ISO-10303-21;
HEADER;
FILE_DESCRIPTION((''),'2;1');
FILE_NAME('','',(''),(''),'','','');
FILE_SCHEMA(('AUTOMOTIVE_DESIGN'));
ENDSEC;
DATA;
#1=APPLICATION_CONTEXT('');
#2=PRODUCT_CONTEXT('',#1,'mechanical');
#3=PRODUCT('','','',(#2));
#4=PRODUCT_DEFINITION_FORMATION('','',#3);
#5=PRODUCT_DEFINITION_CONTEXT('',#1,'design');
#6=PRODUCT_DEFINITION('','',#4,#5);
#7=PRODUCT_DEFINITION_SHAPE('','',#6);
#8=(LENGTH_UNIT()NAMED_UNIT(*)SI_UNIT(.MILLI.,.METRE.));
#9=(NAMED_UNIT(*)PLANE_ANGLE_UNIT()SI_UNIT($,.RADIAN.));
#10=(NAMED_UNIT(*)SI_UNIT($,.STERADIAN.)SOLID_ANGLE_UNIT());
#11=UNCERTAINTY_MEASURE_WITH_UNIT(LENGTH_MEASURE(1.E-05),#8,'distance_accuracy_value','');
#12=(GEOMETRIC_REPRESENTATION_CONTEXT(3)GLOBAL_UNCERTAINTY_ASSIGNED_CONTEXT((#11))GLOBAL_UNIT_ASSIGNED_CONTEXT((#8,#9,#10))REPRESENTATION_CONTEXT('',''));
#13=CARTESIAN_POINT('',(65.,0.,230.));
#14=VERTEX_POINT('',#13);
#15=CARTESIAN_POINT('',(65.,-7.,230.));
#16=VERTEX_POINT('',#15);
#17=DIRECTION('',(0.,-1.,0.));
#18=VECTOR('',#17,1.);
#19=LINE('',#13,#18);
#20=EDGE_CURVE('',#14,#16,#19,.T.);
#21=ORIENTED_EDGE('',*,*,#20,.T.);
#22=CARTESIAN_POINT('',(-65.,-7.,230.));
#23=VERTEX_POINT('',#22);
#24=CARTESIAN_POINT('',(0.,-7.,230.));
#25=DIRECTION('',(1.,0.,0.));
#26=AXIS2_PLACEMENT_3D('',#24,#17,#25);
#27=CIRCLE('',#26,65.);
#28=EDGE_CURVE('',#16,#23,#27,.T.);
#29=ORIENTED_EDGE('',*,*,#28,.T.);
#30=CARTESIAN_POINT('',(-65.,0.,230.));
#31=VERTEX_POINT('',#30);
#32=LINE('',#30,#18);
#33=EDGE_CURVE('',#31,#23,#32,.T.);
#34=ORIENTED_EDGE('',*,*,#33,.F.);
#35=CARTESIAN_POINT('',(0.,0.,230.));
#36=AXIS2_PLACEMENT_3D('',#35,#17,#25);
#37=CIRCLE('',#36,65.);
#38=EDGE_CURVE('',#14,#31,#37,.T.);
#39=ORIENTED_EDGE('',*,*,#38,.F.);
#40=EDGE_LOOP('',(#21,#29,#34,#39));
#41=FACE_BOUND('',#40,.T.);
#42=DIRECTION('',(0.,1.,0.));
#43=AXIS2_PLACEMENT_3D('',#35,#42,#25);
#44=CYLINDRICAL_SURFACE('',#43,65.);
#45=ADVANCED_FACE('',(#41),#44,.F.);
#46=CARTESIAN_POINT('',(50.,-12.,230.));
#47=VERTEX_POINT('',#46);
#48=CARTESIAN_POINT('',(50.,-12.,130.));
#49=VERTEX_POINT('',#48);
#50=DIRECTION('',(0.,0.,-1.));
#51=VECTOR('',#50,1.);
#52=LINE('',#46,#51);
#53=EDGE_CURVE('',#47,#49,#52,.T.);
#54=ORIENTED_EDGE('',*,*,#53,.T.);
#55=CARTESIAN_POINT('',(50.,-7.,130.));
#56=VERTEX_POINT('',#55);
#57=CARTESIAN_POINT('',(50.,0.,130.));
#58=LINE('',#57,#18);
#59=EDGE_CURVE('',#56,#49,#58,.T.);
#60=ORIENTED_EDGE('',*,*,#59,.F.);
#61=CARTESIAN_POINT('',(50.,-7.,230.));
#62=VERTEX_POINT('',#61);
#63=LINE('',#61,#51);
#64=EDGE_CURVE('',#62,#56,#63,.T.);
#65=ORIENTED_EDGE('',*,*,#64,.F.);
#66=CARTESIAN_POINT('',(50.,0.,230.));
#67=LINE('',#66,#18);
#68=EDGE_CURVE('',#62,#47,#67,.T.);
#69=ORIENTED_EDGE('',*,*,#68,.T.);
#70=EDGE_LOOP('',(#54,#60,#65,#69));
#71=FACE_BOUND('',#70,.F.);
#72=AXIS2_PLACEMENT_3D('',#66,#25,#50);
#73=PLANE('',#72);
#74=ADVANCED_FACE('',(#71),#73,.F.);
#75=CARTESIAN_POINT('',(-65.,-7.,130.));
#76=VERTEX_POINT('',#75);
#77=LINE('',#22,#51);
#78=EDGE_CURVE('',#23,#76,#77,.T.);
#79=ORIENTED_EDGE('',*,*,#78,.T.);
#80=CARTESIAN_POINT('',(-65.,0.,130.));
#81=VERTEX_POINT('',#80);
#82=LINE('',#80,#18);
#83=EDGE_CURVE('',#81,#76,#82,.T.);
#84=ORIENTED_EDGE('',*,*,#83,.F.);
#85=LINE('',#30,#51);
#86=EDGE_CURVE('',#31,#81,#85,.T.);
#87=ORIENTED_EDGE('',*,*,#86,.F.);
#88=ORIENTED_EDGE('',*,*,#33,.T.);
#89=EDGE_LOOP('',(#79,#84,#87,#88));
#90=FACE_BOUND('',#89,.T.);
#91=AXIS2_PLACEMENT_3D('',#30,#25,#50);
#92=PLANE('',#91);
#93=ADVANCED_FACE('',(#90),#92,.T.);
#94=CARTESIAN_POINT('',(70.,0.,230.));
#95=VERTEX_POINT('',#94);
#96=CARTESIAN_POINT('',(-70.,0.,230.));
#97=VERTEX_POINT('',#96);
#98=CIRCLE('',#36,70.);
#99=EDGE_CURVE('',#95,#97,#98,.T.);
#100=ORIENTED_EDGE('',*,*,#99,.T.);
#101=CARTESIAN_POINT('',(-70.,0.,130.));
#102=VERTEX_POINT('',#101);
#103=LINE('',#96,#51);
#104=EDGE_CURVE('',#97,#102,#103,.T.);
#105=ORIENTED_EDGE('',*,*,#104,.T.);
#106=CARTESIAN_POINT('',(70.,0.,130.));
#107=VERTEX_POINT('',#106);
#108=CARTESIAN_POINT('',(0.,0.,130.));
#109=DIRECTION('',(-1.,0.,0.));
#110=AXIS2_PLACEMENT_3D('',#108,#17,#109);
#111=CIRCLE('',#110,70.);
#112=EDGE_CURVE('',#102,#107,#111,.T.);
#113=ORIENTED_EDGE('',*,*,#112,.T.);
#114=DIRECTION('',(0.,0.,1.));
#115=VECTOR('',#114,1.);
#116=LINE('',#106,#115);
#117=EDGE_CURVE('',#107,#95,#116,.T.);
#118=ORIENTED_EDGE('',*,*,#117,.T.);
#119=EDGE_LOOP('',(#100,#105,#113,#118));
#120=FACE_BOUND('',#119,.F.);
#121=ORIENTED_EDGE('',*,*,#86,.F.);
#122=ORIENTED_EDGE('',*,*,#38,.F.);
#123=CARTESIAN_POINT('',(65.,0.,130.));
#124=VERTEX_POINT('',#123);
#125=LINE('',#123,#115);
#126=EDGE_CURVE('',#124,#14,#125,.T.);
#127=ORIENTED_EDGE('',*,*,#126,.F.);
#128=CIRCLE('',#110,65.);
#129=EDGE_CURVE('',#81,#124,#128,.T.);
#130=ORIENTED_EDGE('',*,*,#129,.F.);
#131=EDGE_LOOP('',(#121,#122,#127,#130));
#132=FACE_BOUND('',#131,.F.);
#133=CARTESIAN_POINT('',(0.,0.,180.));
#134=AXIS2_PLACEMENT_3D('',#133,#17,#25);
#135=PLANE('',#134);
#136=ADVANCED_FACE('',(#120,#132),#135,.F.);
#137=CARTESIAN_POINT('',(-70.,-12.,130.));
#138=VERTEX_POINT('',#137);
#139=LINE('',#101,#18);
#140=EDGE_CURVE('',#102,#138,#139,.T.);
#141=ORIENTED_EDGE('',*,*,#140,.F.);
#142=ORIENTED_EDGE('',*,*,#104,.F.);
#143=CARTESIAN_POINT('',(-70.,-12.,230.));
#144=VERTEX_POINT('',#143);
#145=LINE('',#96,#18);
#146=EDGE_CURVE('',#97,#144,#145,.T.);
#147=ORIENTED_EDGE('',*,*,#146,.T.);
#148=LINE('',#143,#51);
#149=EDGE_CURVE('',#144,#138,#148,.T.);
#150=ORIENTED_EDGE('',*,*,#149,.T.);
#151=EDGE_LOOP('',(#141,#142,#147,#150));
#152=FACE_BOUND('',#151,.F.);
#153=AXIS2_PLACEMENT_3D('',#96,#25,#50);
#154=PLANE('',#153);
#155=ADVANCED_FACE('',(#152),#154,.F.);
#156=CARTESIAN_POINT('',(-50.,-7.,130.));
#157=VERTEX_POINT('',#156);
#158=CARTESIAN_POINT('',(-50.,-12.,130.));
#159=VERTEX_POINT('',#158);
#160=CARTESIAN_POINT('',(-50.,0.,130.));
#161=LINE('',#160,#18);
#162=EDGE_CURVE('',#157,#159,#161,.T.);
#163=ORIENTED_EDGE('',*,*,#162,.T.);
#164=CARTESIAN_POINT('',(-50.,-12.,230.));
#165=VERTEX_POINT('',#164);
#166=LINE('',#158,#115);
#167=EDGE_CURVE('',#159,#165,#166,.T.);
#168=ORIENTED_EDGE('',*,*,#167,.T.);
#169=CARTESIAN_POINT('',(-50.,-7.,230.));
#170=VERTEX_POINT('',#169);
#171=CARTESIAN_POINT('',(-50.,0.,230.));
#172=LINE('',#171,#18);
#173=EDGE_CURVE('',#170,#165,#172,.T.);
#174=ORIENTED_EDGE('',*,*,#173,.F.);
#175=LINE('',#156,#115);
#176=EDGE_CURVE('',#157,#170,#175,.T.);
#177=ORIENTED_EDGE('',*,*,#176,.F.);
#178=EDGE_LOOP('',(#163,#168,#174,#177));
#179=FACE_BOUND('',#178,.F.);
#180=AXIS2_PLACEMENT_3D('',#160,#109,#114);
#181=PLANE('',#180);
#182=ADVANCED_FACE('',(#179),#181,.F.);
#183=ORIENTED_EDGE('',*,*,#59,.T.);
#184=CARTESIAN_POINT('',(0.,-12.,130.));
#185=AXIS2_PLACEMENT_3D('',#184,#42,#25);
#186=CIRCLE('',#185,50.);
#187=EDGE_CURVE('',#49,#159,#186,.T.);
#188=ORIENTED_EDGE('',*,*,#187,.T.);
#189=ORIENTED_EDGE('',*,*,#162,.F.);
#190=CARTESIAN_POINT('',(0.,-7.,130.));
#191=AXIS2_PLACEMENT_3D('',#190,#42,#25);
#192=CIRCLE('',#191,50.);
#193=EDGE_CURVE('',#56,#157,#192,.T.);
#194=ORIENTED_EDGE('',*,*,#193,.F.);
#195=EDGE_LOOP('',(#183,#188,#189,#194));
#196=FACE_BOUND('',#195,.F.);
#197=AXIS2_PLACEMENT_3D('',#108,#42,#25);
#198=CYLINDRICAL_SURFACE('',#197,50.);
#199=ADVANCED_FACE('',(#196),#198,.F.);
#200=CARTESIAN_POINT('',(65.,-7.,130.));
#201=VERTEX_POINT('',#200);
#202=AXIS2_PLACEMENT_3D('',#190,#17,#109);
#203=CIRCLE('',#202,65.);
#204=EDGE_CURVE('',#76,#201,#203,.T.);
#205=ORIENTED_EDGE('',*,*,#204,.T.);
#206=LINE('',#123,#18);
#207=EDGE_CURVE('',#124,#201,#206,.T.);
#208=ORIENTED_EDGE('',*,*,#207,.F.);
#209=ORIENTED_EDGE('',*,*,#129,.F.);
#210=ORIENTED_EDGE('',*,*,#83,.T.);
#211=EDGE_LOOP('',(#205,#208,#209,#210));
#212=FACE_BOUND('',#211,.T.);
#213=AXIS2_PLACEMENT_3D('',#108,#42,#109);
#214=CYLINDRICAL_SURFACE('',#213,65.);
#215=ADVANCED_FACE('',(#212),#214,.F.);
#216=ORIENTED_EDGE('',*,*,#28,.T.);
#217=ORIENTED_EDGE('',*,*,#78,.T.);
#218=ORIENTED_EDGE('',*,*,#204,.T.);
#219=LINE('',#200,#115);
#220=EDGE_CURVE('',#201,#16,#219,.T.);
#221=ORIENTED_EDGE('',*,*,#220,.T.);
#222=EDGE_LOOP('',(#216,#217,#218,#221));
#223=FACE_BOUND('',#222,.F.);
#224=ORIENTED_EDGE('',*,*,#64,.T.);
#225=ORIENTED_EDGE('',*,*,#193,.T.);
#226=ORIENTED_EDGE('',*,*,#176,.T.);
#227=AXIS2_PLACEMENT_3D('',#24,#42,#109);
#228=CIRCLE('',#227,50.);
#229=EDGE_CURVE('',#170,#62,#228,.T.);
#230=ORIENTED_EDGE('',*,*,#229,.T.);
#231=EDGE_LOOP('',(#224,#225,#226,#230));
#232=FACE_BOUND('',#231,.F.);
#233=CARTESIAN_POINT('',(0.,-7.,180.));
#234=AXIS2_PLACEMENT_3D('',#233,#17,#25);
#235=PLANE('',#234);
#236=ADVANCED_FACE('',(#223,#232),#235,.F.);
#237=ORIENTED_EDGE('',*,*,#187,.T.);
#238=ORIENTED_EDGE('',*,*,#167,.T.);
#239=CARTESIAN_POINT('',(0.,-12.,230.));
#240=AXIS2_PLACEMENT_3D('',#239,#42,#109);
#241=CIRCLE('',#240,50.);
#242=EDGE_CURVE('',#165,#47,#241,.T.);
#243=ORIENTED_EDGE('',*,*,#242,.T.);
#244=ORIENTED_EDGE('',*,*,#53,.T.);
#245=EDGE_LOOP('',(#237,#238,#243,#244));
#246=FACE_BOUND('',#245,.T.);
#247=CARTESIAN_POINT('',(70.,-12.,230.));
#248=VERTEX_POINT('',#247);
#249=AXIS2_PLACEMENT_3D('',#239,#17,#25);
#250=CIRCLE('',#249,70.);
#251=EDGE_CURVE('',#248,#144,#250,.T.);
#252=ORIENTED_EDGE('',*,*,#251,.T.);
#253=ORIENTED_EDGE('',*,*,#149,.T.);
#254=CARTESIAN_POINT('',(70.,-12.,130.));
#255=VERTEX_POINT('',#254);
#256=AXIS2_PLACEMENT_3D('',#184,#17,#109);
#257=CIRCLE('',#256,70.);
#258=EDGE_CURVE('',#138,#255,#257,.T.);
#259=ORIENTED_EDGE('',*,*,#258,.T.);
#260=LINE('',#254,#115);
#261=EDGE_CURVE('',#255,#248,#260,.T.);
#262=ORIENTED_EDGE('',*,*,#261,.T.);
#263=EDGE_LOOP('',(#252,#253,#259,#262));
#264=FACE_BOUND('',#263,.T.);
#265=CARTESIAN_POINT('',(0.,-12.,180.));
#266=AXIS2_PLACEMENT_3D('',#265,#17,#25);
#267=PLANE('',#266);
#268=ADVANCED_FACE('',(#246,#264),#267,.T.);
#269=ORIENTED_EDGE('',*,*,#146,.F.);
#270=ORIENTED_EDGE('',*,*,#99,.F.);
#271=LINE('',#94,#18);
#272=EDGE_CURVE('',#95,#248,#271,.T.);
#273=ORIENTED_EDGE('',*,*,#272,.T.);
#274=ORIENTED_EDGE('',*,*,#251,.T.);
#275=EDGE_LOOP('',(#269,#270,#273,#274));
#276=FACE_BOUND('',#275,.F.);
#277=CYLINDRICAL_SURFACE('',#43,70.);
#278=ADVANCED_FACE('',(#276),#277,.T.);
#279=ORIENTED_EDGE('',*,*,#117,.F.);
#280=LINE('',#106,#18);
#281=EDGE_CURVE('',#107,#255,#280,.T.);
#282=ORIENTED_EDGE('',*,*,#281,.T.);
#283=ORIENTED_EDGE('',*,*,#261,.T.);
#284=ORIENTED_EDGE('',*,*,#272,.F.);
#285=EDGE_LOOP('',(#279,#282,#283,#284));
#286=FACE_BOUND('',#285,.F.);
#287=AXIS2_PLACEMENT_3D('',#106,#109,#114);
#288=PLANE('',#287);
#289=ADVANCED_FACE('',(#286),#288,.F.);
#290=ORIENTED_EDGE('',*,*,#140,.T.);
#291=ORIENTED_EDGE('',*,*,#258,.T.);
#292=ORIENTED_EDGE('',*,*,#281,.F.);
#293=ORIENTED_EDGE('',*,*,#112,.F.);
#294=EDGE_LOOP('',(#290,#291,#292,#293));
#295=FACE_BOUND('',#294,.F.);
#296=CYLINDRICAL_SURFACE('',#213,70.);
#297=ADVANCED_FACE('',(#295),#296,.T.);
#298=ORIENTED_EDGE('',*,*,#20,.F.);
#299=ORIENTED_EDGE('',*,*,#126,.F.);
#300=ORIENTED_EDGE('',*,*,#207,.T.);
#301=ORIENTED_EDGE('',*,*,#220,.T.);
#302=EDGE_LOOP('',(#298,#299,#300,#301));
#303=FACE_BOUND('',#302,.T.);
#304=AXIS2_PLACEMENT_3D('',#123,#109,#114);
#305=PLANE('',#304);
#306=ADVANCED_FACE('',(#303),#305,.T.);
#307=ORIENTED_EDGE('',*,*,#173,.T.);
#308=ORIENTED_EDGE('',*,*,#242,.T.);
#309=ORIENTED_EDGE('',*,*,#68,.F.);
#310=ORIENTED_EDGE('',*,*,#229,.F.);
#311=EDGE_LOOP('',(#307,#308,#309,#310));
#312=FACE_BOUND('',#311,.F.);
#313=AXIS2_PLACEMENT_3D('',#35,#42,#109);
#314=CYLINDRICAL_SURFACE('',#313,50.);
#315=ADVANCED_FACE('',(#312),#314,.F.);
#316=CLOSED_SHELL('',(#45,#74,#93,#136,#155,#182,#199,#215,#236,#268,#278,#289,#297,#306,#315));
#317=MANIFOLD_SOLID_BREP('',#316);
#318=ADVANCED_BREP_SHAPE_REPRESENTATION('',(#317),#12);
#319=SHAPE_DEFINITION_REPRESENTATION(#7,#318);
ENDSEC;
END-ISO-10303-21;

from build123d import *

# Parameters (mm, degrees)
F1_DEPTH = 12
F2_DEPTH = 7


# Not quite as in the source:
# - a feature of the source that left no trace in its solid (it failed there, or was rolled back) is left out


with BuildPart() as f1:
    # F0 (on Front) → F1 (new body)
    with BuildSketch(Plane.XZ):
        with BuildLine():
            Line((70, 130), (70, 230))
            ThreePointArc((70, 230), (0, 300), (-70, 230))
            Line((-70, 230), (-70, 130))
            ThreePointArc((-70, 130), (0, 60), (70, 130))
        make_face()
        with BuildLine():
            Line((-65, 130), (-65, 230))
            ThreePointArc((-65, 230), (0, 295), (65, 230))
            Line((65, 230), (65, 130))
            ThreePointArc((65, 130), (0, 65), (-65, 130))
        make_face(mode=Mode.SUBTRACT)
        with BuildLine():
            ThreePointArc((65, 230), (0, 295), (-65, 230))
            Line((-65, 230), (-65, 130))
            ThreePointArc((-65, 130), (0, 65), (65, 130))
            Line((65, 130), (65, 230))
        make_face()
        with BuildLine():
            Line((-50, 130), (-50, 230))
            ThreePointArc((-50, 230), (0, 280), (50, 230))
            Line((50, 230), (50, 130))
            ThreePointArc((50, 130), (0, 80), (-50, 130))
        make_face(mode=Mode.SUBTRACT)
    extrude(amount=F1_DEPTH)

    # F0 (on Front) → F2 (cut)
    with BuildSketch(Plane.XZ):
        with BuildLine():
            ThreePointArc((65, 230), (0, 295), (-65, 230))
            Line((-65, 230), (-65, 130))
            ThreePointArc((-65, 130), (0, 65), (65, 130))
            Line((65, 130), (65, 230))
        make_face()
        with BuildLine():
            Line((-50, 130), (-50, 230))
            ThreePointArc((-50, 230), (0, 280), (50, 230))
            Line((50, 230), (50, 130))
            ThreePointArc((50, 130), (0, 80), (-50, 130))
        make_face(mode=Mode.SUBTRACT)
    extrude(amount=F2_DEPTH, mode=Mode.SUBTRACT)


solid = f1.part
